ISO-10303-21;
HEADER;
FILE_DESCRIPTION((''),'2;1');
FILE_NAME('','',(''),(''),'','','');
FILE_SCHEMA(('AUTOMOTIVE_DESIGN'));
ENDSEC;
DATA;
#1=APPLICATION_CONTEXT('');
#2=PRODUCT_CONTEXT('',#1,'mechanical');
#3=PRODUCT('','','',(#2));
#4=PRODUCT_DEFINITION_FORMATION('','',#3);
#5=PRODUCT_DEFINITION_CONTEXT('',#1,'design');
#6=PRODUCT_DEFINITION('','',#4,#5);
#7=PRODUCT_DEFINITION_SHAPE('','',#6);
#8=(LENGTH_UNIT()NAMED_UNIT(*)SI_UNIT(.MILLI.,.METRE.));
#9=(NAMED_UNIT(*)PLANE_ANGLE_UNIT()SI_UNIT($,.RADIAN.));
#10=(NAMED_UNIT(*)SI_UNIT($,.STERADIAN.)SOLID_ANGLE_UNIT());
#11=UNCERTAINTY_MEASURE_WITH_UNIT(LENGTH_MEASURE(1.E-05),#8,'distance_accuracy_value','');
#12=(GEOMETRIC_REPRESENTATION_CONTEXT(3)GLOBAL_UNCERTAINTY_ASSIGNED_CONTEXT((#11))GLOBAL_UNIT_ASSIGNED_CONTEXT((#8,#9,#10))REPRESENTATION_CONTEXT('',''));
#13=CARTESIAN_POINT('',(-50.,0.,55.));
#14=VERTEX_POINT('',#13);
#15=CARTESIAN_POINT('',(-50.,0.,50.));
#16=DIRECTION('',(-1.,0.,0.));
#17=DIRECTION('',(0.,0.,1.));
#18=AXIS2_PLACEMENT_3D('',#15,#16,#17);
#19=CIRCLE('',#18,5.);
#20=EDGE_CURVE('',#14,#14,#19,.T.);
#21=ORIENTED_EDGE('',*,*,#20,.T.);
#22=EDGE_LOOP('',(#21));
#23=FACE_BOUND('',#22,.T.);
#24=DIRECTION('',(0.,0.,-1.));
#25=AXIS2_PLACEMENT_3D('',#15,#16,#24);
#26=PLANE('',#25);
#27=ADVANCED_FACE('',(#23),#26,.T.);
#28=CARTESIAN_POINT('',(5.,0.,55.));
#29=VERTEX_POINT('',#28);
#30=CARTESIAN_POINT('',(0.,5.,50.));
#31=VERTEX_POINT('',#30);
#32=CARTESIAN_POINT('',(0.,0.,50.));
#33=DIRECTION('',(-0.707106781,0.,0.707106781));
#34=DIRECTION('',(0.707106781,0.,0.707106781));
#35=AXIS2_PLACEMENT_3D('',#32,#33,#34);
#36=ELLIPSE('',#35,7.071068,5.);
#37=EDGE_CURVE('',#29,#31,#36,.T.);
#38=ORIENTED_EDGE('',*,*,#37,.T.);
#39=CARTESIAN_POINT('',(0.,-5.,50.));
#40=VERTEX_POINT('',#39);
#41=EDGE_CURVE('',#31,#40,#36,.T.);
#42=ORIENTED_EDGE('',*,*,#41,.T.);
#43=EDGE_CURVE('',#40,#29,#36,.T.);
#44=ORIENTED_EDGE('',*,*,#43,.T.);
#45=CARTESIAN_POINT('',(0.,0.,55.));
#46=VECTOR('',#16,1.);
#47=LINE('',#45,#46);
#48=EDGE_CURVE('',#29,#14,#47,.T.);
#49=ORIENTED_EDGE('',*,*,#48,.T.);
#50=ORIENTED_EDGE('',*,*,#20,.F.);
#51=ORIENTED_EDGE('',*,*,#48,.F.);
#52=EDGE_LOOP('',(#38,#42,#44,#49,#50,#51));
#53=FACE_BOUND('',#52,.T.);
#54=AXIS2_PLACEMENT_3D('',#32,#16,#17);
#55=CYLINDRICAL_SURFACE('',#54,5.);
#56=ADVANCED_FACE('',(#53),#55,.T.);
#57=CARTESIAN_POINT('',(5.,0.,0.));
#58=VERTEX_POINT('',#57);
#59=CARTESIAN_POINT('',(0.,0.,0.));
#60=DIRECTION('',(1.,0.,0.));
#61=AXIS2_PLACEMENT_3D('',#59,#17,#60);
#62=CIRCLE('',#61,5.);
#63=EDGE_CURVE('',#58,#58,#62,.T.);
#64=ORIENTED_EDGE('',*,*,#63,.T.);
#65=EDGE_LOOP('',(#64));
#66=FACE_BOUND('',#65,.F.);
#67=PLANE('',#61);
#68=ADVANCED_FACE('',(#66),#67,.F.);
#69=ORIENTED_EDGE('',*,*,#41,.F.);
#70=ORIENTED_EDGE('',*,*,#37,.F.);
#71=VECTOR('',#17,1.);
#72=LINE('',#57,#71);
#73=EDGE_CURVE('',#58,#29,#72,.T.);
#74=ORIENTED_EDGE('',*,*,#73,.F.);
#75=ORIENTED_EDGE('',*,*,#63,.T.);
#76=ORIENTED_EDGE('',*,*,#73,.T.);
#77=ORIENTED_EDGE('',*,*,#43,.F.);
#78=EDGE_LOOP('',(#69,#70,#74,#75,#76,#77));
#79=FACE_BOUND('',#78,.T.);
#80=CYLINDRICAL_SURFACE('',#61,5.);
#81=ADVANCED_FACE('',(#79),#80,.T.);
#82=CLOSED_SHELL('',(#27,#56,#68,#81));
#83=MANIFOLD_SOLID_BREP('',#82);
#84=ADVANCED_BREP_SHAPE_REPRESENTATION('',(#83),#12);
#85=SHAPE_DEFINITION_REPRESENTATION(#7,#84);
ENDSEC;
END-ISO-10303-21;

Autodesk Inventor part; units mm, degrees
ref_plane "YZ Plane" through (0, 0, 0) normal (1, 0, 0) x (0, 1, 0)
ref_plane "XZ Plane" through (0, 0, 0) normal (0, 1, 0) x (-1, 0, 0)
ref_plane "XY Plane" through (0, 0, 0) normal (0, 0, 1) x (1, 0, 0)
sketch "Sketch1" plane through (0, 0, 0) normal (0, 0, 1) x (1, 0, 0)
  circle A0 centre (0, 0) radius 5
sketch "Sketch2" plane through (0, 0, 0) normal (0, 1, 0) x (-1, 0, 0)
  line L0 (0, 0) -> (0, 50)
  line L1 (0, 50) -> (50, 50)
sweep "Sweep1" add profiles "Sketch1" path "Sketch2"
properties part number "29_sweep"
